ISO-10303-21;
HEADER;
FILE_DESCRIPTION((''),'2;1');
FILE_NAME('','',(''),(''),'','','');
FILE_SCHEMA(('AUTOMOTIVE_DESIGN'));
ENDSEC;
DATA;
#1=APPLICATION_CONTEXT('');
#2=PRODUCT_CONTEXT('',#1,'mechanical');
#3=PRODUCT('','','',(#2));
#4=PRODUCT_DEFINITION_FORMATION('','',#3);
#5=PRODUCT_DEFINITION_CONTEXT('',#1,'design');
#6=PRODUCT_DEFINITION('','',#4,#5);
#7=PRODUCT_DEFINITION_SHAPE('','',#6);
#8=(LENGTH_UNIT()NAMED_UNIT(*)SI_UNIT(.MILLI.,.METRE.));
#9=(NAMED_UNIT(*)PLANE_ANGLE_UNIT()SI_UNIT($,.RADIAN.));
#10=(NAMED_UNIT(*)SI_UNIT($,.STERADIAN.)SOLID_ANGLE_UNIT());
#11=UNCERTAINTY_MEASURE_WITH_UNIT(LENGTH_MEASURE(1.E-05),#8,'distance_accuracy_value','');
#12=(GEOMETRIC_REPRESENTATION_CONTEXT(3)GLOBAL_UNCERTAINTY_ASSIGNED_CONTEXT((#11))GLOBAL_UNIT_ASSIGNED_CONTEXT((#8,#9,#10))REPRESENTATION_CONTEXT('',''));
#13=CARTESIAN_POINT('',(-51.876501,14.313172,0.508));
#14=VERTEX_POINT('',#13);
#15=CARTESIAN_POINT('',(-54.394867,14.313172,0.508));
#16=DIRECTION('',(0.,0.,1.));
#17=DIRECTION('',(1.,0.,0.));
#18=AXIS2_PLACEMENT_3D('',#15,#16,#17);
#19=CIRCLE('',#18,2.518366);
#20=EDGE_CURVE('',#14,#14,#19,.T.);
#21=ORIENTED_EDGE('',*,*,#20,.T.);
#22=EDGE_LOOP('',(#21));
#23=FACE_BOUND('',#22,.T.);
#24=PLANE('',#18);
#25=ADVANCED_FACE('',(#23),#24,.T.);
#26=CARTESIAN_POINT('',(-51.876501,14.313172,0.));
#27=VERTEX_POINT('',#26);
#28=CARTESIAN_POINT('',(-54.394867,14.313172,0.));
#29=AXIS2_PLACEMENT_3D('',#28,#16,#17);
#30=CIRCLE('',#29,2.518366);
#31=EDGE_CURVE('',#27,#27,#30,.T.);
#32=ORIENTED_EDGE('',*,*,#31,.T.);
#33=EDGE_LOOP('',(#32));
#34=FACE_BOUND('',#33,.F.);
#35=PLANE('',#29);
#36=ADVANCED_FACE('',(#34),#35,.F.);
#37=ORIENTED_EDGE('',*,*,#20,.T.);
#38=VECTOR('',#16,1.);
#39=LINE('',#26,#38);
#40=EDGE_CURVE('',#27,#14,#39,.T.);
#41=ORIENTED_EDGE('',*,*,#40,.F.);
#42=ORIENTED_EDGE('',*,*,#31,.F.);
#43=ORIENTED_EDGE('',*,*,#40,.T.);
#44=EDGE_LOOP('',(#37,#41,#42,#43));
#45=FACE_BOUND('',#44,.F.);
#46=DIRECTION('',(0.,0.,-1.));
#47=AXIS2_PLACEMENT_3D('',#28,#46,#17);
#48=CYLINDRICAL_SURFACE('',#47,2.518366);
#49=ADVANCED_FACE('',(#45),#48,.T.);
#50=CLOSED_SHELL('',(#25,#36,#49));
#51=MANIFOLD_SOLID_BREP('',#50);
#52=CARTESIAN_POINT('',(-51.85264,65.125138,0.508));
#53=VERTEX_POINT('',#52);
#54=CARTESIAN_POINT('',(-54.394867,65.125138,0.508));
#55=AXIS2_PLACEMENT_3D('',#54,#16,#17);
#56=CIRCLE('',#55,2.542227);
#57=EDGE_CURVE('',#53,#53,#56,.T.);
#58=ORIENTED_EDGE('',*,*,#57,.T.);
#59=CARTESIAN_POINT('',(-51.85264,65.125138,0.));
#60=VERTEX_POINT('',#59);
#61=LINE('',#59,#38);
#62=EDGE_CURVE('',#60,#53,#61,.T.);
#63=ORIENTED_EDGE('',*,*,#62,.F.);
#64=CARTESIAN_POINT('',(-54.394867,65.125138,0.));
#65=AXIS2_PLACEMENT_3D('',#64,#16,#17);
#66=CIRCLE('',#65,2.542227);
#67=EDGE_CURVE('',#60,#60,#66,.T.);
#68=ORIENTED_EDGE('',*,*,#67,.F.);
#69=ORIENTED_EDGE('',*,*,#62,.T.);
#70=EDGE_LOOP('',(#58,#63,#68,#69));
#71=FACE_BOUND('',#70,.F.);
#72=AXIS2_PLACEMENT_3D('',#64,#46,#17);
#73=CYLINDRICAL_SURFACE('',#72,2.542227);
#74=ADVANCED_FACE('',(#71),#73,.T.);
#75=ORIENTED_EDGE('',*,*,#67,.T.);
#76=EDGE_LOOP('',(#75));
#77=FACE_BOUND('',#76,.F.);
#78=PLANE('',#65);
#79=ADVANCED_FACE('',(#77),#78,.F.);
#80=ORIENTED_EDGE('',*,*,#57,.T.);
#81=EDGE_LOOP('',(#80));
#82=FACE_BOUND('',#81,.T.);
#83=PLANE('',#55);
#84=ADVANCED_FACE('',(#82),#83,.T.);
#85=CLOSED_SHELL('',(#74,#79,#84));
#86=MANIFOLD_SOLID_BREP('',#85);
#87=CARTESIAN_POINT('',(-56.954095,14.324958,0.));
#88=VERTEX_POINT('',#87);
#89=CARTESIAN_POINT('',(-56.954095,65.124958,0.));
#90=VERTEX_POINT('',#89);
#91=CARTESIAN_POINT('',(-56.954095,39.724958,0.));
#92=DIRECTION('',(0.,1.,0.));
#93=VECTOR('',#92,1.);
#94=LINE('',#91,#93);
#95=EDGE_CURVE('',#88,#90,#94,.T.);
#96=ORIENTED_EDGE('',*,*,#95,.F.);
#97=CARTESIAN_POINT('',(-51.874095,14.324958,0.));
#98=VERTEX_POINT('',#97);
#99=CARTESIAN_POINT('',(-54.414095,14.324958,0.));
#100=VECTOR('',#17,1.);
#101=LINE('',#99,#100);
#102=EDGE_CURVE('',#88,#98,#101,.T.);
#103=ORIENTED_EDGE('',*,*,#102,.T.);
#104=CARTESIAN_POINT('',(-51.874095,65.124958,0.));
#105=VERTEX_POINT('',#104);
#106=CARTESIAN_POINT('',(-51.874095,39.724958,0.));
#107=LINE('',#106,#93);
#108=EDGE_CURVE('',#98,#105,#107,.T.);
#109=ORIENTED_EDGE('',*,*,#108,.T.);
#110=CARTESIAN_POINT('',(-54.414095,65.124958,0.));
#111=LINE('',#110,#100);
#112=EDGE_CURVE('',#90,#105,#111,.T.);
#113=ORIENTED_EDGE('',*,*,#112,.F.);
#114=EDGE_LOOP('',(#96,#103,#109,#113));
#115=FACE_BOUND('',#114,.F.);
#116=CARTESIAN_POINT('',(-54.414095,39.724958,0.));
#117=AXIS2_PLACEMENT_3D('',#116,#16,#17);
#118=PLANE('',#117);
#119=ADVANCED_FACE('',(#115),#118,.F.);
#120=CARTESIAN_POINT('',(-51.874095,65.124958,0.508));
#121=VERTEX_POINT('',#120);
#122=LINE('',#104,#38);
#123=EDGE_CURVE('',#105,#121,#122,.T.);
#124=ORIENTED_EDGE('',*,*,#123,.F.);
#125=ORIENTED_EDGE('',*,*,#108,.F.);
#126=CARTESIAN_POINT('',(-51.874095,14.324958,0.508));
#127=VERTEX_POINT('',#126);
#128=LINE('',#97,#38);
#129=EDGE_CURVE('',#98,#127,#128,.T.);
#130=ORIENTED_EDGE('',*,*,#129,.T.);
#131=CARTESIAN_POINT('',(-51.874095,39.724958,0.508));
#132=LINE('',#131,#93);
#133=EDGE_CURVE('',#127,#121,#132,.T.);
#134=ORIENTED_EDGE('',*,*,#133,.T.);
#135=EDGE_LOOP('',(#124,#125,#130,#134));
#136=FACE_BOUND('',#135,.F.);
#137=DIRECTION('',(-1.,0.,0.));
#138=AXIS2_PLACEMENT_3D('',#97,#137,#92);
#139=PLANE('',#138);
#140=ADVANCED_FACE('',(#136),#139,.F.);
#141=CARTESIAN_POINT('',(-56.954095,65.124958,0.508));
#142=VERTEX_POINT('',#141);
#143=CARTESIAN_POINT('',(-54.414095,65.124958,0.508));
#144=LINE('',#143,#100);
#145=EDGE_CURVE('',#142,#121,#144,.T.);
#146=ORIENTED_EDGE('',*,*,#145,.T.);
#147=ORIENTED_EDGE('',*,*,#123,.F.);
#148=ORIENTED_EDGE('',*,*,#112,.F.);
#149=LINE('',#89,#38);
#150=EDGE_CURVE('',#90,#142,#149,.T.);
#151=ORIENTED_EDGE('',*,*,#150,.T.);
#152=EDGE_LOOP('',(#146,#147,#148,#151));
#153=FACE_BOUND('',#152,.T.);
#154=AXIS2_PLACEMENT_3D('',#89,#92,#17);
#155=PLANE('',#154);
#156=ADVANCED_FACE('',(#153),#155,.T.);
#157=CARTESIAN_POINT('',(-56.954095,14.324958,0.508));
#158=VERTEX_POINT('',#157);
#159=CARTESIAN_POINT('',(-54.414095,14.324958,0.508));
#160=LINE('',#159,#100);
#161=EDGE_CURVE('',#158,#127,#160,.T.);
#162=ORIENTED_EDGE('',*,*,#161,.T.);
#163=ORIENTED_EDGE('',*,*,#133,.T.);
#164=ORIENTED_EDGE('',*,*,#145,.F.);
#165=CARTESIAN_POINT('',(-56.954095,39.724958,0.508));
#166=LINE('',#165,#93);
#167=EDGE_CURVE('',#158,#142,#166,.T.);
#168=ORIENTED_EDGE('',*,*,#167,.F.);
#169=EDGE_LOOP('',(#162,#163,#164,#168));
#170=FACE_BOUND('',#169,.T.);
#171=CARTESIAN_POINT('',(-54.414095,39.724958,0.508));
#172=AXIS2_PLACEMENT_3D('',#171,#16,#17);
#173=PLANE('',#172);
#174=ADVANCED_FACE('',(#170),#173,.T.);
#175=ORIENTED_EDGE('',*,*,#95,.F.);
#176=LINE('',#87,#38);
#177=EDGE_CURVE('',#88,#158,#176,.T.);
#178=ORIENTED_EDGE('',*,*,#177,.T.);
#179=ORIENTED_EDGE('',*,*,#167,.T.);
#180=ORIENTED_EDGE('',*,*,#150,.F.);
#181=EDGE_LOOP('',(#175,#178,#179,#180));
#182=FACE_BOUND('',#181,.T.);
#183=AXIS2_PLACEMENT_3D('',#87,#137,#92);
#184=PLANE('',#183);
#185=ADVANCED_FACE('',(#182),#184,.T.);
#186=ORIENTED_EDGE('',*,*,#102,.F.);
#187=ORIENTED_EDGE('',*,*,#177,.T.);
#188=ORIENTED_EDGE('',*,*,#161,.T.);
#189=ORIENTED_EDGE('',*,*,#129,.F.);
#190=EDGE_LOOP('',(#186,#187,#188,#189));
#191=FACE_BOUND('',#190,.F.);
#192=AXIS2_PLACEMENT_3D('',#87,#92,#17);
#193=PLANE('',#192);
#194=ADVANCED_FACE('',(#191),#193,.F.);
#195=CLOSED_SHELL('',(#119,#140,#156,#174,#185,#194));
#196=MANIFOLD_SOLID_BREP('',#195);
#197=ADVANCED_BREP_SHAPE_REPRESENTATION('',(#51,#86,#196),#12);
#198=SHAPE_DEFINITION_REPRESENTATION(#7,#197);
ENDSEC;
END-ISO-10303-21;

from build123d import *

# Parameters (mm, degrees)
F0_W     = 5.08
F0_H     = 50.8
F3_DEPTH = 0.508
F1_R     = 2.5422270568
F1_R_2   = 2.5183658608


with BuildPart() as f3:
    # F0 (on Top) → F3 (new body)
    with BuildSketch(Plane.XY):
        with Locations((-54.4140953571, 39.7249583329)):
            Rectangle(F0_W, F0_H)
    extrude(amount=F3_DEPTH)


with BuildPart() as f3b:
    # F1 (on Top) → F3, piece 2 (new body)
    with BuildSketch(Plane.XY):
        with Locations((-54.3948672712, 65.1251375675)):
            Circle(F1_R)
    extrude(amount=F3_DEPTH)


with BuildPart() as f3c:
    # F1 (on Top) → F3, piece 3 (new body)
    with BuildSketch(Plane.XY):
        with Locations((-54.3948672712, 14.3131716177)):
            Circle(F1_R_2)
    extrude(amount=F3_DEPTH)


solid = Compound([f3.part, f3b.part, f3c.part])
